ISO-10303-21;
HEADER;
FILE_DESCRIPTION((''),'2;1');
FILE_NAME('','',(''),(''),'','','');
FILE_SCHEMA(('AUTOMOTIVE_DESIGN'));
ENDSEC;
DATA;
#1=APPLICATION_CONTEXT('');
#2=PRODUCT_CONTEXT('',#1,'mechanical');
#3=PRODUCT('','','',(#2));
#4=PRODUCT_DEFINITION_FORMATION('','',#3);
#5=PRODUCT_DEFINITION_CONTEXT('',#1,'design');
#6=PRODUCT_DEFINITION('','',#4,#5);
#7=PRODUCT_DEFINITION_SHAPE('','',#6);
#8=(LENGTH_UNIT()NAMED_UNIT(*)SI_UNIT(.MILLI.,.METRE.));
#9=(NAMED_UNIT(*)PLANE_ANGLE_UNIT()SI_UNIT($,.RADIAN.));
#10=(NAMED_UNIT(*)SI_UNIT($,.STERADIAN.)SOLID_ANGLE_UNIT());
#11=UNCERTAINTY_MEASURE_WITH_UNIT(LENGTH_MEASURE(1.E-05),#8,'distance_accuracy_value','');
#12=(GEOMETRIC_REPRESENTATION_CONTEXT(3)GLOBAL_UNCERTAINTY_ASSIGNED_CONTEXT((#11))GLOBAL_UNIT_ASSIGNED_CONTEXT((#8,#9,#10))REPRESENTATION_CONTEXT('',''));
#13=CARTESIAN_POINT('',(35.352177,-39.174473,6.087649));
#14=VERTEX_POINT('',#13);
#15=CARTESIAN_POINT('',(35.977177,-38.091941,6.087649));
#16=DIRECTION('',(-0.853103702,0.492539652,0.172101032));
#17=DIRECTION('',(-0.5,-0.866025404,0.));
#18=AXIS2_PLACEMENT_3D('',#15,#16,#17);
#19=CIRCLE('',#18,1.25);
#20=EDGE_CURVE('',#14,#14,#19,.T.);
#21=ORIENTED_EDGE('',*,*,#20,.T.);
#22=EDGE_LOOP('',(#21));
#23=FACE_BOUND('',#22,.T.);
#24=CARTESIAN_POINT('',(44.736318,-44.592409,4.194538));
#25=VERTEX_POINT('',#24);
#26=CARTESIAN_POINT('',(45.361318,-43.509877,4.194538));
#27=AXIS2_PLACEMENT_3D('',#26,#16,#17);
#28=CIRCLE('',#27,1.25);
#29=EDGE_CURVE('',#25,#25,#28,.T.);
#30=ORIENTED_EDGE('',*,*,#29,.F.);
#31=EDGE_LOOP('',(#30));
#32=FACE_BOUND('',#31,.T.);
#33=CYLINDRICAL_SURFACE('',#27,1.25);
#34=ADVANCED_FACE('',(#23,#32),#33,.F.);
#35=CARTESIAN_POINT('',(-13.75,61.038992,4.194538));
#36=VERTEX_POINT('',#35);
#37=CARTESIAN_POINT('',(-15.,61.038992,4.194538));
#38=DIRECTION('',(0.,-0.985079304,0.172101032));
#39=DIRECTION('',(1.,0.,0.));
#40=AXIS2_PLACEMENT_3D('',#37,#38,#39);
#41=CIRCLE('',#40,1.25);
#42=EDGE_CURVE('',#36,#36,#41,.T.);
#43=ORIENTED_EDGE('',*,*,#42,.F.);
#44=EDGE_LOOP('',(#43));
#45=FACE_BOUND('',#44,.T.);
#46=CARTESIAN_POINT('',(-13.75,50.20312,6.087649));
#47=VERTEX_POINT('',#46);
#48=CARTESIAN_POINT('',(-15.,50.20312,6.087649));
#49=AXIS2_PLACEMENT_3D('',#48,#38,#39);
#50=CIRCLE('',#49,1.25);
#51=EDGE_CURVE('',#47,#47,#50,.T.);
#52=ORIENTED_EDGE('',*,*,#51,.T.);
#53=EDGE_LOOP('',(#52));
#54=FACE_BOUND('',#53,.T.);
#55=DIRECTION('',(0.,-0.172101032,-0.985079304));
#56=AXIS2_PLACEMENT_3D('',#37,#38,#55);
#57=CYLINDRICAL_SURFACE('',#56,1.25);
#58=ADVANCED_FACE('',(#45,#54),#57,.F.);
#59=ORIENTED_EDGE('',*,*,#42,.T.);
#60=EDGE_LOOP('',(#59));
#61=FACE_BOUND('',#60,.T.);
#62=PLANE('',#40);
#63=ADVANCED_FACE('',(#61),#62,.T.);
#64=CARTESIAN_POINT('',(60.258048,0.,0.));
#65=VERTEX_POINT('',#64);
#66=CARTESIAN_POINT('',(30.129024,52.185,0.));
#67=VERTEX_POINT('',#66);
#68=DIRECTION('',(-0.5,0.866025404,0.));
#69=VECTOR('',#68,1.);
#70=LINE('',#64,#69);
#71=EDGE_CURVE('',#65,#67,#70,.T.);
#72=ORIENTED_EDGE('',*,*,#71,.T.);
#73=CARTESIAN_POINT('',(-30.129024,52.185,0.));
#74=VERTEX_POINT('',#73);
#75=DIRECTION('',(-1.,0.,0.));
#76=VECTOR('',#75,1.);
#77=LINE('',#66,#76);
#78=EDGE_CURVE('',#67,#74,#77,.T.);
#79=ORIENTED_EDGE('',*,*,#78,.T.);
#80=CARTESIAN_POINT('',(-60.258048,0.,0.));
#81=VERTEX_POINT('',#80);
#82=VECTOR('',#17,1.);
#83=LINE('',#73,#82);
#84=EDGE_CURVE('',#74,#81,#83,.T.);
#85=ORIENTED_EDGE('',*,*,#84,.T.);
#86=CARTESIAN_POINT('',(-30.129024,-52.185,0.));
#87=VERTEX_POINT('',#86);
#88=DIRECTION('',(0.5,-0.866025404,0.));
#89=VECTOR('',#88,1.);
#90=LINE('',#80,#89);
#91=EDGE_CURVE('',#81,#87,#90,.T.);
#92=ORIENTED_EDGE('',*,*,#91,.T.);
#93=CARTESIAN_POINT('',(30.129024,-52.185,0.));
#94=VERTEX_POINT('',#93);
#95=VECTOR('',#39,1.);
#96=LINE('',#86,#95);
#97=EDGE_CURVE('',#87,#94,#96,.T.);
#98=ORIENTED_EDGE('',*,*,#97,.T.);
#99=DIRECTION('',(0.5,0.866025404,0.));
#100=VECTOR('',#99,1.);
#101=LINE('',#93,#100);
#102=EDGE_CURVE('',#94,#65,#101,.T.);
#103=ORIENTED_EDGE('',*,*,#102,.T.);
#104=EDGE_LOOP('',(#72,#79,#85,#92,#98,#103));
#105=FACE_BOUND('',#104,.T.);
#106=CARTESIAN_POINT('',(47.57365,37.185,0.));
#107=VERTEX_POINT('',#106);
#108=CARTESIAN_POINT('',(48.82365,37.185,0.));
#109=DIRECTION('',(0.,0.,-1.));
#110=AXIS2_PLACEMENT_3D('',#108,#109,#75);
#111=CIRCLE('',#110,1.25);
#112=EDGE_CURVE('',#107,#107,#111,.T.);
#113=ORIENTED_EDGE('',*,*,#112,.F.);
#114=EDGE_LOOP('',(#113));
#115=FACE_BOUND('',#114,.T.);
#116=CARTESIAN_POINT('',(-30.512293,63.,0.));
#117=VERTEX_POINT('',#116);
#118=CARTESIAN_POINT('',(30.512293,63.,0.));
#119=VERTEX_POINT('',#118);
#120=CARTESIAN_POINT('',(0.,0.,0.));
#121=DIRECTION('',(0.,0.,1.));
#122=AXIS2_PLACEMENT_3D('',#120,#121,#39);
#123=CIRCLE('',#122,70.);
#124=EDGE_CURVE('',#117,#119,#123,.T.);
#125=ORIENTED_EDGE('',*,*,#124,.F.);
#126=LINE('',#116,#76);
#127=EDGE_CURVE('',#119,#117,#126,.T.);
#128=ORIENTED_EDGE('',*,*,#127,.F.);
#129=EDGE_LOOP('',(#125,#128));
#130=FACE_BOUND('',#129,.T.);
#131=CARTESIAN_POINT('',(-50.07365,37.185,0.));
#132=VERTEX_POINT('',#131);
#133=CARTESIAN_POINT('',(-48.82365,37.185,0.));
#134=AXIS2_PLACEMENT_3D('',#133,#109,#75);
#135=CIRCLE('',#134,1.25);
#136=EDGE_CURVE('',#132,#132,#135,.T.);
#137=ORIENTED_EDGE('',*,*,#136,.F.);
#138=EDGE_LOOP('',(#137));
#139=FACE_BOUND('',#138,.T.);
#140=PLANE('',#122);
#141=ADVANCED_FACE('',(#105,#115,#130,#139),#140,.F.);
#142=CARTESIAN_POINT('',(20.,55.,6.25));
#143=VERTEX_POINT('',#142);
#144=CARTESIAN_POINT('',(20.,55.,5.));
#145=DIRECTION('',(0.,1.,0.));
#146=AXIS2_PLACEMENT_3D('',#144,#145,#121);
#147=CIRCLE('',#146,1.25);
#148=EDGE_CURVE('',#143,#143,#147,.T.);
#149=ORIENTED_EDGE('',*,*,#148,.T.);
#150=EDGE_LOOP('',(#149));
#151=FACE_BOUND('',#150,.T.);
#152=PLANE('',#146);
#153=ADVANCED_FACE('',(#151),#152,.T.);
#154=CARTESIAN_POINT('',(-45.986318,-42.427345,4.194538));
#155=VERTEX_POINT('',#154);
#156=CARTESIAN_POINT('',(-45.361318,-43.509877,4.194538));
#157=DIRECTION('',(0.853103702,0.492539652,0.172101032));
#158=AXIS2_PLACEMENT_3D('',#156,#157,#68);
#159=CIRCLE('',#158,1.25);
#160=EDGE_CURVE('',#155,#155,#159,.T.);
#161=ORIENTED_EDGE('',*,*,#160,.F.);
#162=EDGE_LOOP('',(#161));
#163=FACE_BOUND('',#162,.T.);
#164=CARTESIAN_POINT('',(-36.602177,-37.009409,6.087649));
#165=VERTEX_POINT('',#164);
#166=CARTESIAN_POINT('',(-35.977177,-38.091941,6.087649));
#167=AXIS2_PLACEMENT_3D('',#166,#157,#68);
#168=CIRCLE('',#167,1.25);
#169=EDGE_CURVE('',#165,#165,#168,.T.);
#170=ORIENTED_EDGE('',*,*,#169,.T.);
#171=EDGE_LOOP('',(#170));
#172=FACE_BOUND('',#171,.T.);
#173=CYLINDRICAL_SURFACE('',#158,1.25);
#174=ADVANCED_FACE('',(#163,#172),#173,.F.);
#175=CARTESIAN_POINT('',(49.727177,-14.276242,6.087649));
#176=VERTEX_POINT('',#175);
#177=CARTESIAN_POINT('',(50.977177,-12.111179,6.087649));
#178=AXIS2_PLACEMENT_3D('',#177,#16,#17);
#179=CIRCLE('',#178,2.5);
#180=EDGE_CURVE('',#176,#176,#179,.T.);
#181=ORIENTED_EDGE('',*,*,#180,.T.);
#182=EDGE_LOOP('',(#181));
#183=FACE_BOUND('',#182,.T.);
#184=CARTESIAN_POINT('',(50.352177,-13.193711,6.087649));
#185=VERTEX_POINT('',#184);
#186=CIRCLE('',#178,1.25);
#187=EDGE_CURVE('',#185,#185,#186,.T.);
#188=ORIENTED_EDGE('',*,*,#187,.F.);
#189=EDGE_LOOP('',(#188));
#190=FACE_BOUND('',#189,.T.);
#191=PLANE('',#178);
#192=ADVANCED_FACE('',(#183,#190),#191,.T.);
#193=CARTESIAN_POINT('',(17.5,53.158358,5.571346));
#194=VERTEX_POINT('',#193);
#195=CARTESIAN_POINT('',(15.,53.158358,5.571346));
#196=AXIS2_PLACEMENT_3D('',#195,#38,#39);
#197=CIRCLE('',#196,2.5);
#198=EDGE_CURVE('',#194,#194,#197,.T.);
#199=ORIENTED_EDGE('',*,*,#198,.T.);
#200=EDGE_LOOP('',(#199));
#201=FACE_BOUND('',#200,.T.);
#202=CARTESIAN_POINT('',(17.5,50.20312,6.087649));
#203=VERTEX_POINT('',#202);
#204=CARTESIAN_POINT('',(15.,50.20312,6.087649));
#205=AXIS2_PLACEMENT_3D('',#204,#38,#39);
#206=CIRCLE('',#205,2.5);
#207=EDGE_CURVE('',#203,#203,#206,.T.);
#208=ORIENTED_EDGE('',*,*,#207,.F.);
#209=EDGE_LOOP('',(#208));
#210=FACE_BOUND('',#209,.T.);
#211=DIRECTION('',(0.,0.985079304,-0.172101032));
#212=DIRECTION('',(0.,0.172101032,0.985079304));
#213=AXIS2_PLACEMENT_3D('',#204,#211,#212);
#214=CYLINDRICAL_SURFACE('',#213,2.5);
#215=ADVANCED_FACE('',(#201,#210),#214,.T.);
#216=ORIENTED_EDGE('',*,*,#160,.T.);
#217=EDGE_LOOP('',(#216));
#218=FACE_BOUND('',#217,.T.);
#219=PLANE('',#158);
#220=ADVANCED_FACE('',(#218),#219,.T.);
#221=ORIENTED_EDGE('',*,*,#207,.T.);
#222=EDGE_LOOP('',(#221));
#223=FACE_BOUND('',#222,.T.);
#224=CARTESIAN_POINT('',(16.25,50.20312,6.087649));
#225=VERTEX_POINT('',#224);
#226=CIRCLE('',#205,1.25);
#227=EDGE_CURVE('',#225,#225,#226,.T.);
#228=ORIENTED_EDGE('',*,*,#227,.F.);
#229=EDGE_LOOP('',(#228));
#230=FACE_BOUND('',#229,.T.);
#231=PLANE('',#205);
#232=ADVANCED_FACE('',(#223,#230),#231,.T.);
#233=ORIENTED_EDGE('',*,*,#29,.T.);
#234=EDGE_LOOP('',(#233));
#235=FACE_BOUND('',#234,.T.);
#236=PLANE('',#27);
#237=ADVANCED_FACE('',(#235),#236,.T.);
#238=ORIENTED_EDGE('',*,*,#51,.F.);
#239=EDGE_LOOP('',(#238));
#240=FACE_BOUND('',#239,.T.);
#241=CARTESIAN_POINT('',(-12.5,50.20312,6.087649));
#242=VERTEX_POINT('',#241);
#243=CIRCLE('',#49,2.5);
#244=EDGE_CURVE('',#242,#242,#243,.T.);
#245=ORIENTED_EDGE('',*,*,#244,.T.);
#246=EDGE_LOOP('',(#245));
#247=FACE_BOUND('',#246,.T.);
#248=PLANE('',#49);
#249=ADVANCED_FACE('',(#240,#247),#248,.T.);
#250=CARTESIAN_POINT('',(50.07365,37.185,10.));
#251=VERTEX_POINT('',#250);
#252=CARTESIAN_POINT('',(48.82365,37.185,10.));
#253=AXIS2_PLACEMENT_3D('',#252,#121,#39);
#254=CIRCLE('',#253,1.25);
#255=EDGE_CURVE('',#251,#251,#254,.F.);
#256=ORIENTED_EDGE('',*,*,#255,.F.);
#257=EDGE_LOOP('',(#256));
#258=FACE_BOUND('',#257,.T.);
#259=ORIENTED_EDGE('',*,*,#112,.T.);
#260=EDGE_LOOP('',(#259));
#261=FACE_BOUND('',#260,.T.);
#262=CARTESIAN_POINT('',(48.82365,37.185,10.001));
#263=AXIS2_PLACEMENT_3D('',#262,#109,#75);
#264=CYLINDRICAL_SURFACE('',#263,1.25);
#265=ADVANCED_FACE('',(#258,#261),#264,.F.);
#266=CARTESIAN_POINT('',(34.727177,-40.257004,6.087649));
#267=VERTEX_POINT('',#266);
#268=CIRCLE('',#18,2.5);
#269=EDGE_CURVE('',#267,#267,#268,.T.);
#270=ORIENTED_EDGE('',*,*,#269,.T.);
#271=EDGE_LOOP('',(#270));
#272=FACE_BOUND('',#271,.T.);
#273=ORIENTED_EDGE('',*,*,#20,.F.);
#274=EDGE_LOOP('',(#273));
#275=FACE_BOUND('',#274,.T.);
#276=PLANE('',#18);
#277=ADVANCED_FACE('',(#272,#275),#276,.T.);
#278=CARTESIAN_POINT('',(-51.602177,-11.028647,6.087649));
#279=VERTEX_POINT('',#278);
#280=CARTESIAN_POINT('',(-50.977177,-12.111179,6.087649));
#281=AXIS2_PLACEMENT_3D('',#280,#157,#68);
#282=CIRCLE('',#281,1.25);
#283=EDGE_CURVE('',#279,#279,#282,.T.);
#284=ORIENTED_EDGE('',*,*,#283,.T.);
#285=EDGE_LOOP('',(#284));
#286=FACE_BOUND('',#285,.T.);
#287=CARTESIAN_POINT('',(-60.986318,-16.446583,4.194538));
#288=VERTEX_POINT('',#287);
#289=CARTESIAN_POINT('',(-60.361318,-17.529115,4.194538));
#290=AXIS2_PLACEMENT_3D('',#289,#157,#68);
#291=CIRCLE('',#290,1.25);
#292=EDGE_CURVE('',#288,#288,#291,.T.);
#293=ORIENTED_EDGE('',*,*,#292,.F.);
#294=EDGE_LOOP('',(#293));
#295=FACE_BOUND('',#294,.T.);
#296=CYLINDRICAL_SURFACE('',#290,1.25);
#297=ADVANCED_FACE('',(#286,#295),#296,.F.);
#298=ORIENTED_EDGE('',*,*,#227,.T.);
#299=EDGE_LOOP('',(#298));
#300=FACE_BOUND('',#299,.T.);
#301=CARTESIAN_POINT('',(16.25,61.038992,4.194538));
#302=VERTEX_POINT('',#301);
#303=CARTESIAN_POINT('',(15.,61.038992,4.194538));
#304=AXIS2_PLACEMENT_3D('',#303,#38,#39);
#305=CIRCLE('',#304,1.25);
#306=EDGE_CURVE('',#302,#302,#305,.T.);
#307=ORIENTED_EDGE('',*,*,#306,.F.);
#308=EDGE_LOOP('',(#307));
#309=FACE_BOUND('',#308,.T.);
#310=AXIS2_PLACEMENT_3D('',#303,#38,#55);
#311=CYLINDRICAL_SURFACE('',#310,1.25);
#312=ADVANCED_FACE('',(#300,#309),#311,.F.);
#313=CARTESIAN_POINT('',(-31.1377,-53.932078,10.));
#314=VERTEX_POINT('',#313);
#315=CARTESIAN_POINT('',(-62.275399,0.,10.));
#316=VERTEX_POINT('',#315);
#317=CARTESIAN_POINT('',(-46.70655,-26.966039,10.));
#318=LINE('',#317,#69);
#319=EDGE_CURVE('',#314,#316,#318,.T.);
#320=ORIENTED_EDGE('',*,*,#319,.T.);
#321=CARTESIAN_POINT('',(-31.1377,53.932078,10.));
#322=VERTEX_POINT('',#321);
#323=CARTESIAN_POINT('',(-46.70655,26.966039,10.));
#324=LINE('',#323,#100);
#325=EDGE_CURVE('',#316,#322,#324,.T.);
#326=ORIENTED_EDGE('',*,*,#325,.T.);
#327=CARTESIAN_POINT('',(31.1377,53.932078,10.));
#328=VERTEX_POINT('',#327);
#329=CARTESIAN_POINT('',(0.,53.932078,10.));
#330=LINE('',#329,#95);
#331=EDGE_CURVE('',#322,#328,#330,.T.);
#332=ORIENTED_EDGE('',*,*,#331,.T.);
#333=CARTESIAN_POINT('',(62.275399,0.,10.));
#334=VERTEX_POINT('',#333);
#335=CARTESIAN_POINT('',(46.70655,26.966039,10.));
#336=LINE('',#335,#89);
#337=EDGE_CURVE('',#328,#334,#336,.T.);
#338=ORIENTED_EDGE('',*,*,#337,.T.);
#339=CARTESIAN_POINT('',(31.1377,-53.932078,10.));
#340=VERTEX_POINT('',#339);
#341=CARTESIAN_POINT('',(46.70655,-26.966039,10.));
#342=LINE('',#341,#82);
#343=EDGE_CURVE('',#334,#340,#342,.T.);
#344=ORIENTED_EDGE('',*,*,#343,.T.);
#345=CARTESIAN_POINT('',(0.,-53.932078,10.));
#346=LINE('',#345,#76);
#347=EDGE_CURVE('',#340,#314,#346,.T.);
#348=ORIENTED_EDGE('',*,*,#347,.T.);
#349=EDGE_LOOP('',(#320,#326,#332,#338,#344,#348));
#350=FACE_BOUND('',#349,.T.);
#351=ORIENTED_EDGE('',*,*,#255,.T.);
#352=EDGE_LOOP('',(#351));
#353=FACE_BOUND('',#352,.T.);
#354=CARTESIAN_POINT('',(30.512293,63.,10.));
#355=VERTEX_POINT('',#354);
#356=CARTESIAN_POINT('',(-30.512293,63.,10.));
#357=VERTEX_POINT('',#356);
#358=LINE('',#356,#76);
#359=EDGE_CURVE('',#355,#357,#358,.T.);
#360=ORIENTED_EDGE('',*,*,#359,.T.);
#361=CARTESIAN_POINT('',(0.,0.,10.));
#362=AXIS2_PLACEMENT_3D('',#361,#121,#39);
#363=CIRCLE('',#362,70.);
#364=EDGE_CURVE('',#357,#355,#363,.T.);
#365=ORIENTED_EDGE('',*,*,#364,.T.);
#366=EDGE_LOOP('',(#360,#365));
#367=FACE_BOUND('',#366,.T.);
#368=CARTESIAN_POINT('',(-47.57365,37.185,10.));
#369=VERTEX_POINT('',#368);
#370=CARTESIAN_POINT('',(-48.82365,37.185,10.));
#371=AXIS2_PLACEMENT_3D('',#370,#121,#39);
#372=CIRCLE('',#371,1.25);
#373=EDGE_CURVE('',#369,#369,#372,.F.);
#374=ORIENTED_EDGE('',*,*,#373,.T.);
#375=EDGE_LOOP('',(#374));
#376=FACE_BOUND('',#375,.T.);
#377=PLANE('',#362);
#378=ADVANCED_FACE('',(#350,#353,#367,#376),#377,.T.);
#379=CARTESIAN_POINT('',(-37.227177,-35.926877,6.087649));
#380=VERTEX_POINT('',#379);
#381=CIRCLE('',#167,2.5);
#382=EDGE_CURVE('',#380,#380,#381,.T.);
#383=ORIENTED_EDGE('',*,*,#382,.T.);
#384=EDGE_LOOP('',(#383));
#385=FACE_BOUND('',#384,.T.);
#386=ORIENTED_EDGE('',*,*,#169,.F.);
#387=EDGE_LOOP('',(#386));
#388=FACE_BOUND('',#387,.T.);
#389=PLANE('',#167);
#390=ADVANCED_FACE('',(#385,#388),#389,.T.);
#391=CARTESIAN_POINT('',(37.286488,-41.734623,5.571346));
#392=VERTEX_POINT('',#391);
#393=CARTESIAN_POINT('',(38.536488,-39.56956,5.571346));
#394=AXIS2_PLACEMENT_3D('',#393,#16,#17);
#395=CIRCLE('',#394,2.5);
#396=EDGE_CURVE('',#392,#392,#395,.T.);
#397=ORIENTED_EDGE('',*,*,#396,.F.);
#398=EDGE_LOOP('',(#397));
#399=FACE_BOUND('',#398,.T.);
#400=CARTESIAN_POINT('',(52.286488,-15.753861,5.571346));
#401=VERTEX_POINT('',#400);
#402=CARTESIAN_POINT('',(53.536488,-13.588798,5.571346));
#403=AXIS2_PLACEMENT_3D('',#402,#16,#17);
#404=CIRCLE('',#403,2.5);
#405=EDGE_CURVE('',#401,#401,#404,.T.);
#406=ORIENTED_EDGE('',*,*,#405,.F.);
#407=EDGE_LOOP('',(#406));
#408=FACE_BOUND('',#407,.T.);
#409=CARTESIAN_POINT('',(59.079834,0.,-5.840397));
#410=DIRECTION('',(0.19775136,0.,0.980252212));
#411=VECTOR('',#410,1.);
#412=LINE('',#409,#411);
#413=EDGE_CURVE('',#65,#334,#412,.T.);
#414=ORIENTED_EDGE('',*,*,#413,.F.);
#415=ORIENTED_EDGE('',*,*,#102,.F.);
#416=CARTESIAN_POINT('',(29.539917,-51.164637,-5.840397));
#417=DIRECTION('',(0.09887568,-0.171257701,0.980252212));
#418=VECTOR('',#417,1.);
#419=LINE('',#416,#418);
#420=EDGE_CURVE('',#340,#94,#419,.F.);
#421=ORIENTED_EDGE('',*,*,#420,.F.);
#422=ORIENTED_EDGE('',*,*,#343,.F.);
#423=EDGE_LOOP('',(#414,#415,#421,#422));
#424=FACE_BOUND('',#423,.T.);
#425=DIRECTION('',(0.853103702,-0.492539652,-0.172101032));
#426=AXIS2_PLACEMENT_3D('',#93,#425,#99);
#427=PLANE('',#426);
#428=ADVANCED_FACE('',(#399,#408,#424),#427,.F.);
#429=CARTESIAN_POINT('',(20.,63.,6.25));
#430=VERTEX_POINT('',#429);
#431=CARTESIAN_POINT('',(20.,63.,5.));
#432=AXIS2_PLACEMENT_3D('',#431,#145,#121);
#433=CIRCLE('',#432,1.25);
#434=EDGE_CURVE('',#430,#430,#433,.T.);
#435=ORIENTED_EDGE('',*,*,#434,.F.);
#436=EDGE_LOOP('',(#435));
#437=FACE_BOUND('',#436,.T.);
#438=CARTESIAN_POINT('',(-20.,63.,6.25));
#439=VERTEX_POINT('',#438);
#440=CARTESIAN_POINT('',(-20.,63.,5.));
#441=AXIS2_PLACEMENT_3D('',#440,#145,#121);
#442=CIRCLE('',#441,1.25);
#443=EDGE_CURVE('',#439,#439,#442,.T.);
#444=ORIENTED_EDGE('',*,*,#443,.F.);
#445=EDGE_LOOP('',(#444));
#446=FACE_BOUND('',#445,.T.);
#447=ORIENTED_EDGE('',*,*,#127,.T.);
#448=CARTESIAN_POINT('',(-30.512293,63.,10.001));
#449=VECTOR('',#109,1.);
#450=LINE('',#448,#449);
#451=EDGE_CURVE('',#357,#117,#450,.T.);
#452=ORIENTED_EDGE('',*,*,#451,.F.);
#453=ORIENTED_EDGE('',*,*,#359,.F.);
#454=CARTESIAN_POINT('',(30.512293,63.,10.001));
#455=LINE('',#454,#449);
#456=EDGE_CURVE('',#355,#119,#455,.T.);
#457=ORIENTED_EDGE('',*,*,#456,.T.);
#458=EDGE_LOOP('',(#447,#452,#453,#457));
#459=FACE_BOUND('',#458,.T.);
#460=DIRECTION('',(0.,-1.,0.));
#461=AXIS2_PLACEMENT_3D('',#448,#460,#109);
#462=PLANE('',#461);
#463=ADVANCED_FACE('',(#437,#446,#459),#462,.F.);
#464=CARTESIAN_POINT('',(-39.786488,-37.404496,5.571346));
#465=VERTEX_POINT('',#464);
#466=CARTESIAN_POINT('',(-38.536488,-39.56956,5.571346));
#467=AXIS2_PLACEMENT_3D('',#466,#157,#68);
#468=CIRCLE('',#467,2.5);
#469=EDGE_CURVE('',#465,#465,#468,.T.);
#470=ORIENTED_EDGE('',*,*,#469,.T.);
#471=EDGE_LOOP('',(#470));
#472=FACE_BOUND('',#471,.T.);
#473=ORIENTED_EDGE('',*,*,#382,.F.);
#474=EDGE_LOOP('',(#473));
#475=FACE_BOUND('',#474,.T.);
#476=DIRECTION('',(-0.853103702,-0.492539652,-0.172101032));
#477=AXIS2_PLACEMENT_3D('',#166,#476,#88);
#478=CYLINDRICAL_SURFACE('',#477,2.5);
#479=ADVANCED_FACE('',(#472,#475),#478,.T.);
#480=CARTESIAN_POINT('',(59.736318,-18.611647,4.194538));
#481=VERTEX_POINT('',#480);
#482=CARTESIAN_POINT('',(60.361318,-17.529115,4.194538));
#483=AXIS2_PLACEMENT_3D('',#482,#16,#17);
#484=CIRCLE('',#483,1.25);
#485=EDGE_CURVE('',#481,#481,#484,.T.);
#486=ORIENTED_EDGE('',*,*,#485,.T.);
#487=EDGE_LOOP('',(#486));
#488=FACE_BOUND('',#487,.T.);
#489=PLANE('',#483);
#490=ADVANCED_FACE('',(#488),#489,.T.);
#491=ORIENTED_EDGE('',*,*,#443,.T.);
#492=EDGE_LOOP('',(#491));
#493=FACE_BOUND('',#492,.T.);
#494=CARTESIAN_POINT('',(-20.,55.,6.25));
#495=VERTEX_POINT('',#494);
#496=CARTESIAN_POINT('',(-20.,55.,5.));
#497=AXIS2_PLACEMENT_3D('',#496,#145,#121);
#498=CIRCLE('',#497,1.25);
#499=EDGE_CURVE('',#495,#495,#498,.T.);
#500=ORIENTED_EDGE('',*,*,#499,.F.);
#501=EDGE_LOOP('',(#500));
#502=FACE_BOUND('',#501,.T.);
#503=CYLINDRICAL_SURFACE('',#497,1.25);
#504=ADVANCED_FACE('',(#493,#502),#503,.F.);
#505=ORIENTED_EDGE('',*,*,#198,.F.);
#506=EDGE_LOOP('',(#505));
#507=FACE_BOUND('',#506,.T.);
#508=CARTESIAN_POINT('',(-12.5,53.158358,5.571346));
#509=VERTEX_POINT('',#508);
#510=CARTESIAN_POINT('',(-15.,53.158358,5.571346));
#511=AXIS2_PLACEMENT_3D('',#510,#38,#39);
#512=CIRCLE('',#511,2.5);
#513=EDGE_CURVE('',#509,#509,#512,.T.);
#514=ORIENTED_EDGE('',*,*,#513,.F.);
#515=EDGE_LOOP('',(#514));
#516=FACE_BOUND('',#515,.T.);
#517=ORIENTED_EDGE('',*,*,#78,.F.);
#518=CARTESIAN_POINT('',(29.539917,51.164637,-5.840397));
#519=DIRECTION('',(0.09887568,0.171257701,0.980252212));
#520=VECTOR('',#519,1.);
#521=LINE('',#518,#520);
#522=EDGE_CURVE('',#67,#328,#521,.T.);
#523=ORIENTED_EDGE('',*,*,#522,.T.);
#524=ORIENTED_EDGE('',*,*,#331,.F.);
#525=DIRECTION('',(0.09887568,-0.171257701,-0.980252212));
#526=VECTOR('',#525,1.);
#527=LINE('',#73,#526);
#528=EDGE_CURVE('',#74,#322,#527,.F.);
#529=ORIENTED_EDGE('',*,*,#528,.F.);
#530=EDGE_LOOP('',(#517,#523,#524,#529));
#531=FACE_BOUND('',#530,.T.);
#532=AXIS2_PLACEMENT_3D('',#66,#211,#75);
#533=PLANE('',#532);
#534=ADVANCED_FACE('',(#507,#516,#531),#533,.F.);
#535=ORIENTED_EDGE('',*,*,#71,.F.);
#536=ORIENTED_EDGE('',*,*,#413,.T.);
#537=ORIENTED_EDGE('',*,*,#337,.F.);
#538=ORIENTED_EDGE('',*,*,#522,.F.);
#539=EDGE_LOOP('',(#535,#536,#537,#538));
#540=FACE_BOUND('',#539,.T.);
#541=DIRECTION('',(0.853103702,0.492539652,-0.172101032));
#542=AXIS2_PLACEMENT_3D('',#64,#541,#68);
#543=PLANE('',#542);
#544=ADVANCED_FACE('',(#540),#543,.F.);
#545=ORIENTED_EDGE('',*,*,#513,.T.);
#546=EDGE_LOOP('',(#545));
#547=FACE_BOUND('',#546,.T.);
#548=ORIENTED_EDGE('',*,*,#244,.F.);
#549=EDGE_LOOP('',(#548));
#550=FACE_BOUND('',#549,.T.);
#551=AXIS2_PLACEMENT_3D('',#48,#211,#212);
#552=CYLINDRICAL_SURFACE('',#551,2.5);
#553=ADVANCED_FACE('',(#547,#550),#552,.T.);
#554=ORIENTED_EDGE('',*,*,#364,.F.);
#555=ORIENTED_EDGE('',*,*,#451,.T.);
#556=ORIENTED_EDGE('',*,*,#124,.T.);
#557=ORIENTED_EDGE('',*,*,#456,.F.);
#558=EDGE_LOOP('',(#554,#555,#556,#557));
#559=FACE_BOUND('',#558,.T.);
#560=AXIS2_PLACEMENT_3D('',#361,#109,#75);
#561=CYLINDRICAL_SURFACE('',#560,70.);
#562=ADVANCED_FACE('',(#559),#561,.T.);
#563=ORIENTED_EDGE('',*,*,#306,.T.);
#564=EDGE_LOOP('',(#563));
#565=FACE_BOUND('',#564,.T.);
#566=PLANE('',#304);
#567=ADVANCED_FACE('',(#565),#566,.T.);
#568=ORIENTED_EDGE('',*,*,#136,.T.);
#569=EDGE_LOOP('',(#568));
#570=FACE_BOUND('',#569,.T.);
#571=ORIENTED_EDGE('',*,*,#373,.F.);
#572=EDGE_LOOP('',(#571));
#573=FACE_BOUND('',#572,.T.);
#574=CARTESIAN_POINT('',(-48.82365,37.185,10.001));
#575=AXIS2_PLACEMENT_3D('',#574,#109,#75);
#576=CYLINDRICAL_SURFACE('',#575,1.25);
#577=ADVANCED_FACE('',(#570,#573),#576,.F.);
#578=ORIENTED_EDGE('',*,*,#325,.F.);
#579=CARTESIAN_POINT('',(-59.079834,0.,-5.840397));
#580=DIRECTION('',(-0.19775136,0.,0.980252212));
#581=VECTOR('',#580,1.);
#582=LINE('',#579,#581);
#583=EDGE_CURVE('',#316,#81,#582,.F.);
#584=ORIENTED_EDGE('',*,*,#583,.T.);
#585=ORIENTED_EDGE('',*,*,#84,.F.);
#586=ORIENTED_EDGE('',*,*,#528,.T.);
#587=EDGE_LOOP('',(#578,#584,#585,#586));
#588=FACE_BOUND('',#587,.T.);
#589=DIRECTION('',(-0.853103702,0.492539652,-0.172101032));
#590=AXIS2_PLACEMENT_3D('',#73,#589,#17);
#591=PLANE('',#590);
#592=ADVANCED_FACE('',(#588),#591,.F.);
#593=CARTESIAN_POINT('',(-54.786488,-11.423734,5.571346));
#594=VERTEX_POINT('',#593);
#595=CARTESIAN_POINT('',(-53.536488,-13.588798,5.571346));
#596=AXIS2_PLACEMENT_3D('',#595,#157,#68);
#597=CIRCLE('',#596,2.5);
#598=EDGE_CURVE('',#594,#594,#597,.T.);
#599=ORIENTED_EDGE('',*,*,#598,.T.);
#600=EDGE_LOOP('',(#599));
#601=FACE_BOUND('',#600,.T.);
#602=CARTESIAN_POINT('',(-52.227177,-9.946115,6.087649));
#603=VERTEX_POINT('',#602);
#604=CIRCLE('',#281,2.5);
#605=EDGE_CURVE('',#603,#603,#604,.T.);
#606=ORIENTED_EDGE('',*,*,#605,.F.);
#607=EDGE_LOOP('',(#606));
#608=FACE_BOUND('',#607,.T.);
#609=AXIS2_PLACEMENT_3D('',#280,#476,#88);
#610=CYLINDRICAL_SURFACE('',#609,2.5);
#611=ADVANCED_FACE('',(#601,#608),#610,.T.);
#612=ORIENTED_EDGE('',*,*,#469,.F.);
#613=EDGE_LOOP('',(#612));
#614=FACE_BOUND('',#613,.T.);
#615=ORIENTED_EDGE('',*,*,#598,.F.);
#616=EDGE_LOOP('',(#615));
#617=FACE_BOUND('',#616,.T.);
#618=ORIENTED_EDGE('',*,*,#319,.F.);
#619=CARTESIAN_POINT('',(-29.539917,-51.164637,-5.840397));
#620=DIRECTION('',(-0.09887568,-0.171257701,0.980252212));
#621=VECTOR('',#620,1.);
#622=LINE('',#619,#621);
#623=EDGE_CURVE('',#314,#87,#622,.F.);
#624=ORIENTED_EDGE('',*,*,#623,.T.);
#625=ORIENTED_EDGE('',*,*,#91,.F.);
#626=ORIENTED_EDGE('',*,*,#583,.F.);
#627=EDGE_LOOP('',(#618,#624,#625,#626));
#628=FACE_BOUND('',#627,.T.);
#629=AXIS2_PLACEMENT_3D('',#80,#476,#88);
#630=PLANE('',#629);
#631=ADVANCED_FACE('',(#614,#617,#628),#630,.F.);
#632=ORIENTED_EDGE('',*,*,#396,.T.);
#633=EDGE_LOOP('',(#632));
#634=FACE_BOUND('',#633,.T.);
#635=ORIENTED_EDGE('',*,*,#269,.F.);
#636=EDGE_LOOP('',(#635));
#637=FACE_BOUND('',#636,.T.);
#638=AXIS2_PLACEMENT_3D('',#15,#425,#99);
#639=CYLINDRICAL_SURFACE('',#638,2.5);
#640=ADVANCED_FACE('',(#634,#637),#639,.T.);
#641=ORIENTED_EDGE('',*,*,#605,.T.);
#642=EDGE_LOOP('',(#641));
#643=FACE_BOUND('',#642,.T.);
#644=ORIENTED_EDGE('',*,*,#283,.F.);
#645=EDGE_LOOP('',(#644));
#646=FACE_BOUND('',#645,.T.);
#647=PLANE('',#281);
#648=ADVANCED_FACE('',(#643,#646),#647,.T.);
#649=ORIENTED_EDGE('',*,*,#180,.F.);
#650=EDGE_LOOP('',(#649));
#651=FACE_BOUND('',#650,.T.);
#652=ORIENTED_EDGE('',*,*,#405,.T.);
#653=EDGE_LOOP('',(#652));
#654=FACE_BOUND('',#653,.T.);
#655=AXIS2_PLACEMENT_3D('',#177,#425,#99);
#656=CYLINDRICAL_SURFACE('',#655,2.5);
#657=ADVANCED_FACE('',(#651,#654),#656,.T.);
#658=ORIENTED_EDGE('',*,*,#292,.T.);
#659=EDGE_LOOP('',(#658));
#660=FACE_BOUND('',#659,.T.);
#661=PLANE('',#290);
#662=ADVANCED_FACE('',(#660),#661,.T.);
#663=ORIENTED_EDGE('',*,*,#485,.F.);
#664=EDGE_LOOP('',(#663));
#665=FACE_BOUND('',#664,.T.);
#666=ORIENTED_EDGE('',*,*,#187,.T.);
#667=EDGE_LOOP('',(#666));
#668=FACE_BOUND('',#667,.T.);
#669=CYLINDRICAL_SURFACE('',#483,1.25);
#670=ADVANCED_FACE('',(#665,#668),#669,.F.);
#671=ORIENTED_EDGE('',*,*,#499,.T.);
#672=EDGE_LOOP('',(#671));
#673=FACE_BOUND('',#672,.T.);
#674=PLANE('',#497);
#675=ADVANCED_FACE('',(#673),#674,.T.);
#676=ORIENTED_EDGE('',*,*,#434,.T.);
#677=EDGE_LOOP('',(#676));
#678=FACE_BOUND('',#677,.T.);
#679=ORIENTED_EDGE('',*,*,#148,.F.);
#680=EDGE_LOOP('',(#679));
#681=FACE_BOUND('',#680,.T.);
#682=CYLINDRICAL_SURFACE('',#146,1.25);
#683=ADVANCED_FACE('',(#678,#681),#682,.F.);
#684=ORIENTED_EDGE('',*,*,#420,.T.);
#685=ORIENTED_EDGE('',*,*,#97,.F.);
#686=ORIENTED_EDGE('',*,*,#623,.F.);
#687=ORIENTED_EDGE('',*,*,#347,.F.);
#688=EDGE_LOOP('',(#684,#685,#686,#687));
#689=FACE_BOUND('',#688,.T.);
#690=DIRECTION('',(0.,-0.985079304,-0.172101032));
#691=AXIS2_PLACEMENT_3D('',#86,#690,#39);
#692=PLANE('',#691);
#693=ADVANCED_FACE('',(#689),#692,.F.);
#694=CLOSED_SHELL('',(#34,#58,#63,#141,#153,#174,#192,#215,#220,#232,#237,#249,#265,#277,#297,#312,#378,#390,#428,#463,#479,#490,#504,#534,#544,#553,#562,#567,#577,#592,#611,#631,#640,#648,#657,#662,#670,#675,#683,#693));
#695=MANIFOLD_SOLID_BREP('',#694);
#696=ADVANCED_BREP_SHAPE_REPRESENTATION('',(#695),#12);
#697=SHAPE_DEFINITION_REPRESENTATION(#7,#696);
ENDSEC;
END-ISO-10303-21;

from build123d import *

# Parameters (mm, degrees)
ESQUISSE1_R                  = 70
BOSS_EXTRU_1_DEPTH           = 10
CHANFREIN1_SIZE              = 10.000000024
CHANFREIN1_SIZE_2            = 1.74707794
ESQUISSE2_R                  = 1.25
ENL_V_MAT_EXTRU_1_DEPTH      = 8
BOSS_EXTRU_2_START           = 3
ESQUISSE3_R                  = 2.5
ESQUISSE3_R_2                = 1.25
BOSS_EXTRU_2_DEPTH           = 3
R_P_TITION_CIRCULAIRE1_COUNT = 3
ENL_V_MAT_EXTRU_2_REACH      = 101.499
ESQUISSE5_R                  = 1.25
ENL_V_MAT_EXTRU_3_DEPTH      = 8
ENL_V_MAT_EXTRU_4_REACH      = 101.499
ESQUISSE6_R                  = 1.25


with BuildPart() as part:
    # Esquisse1 → Boss.-Extru.1 (new body)
    with BuildSketch(Plane.XY):
        Circle(ESQUISSE1_R)
        Polygon((60.258047595, 0), (30.129023798, 52.185), (-30.129023798, 52.185), (-60.258047595, 0), (-30.129023798, -52.185), (30.129023798, -52.185), align=None, mode=Mode.SUBTRACT)
    extrude(amount=BOSS_EXTRU_1_DEPTH)

    # Chanfrein1
    # the kernel refuses this chamfer: 10.000000024, 1.74707794 mm, written as the material it takes off along each edge
    with BuildSketch(Plane(origin=(-17.136199158, 74.68923241, 10), x_dir=(0.005735622158407684, -0.0033114629971266528, -0.9999780681851351), z_dir=(-0.49999999999999933, -0.866025403784439, 0))) as chanfrein1_piece_1_section:
        Polygon((CHANFREIN1_SIZE * 0.999978068229, -CHANFREIN1_SIZE * 0.00662292599454), (-CHANFREIN1_SIZE_2 * 0.00662292599425, -CHANFREIN1_SIZE_2 * 0.999978068185), (0, 0), align=None)
    chanfrein1_piece_1 = extrude(amount=112.229346155, mode=Mode.PRIVATE)
    chanfrein1_piece_1 = split(chanfrein1_piece_1, bisect_by=Plane(origin=(-67.992097392, 13.395767196, 6.396743043), z_dir=(0.8660254037844387, 0.5000000000000003, 0)), keep=Keep.TOP, mode=Mode.PRIVATE)
    chanfrein1_piece_1 = split(chanfrein1_piece_1, bisect_by=Plane(origin=(-45.597123391, 52.185, 6.396743043), z_dir=(0, -1, 0)), keep=Keep.TOP, mode=Mode.PRIVATE)
    add(chanfrein1_piece_1, mode=Mode.SUBTRACT)
    with BuildSketch(Plane(origin=(-73.250872235, 22.50423241, 10), x_dir=(0.005735622158407019, 0.0033114629971262776, -0.9999780681851351), z_dir=(0.5000000000000003, -0.8660254037844386, 0))) as chanfrein1_piece_2_section:
        Polygon((CHANFREIN1_SIZE * 0.999978068229, -CHANFREIN1_SIZE * 0.00662292599454), (-CHANFREIN1_SIZE_2 * 0.00662292599425, -CHANFREIN1_SIZE_2 * 0.999978068185), (0, 0), align=None)
    chanfrein1_piece_2 = extrude(amount=112.229346155, mode=Mode.PRIVATE)
    chanfrein1_piece_2 = split(chanfrein1_piece_2, bisect_by=Plane(origin=(-45.597123391, -52.185, 6.396743043), z_dir=(0, 1, 0)), keep=Keep.TOP, mode=Mode.PRIVATE)
    chanfrein1_piece_2 = split(chanfrein1_piece_2, bisect_by=Plane(origin=(-67.992097392, -13.395767196, 6.396743043), z_dir=(0.866025403784439, -0.49999999999999933, 0)), keep=Keep.TOP, mode=Mode.PRIVATE)
    add(chanfrein1_piece_2, mode=Mode.SUBTRACT)
    with BuildSketch(Plane(origin=(-56.114673077, -52.185, 10), x_dir=(0, 0.006622925994253088, -0.9999780681851351), z_dir=(1, 0, 0))) as chanfrein1_piece_3_section:
        Polygon((CHANFREIN1_SIZE * 0.999978068229, -CHANFREIN1_SIZE * 0.00662292599454), (-CHANFREIN1_SIZE_2 * 0.00662292599425, -CHANFREIN1_SIZE_2 * 0.999978068185), (0, 0), align=None)
    chanfrein1_piece_3 = extrude(amount=112.229346155, mode=Mode.PRIVATE)
    chanfrein1_piece_3 = split(chanfrein1_piece_3, bisect_by=Plane(origin=(22.394974001, -65.580767196, 6.396743043), z_dir=(-0.8660254037844392, 0.4999999999999993, 0)), keep=Keep.TOP, mode=Mode.PRIVATE)
    chanfrein1_piece_3 = split(chanfrein1_piece_3, bisect_by=Plane(origin=(-22.394974001, -65.580767196, 6.396743043), z_dir=(0.8660254037844387, 0.5000000000000003, 0)), keep=Keep.TOP, mode=Mode.PRIVATE)
    add(chanfrein1_piece_3, mode=Mode.SUBTRACT)
    with BuildSketch(Plane(origin=(17.136199158, -74.68923241, 10), x_dir=(-0.005735622158407349, 0.0033114629971264585, -0.9999780681851351), z_dir=(0.4999999999999993, 0.8660254037844392, 0))) as chanfrein1_piece_4_section:
        Polygon((CHANFREIN1_SIZE * 0.999978068229, -CHANFREIN1_SIZE * 0.00662292599454), (-CHANFREIN1_SIZE_2 * 0.00662292599425, -CHANFREIN1_SIZE_2 * 0.999978068185), (0, 0), align=None)
    chanfrein1_piece_4 = extrude(amount=112.229346155, mode=Mode.PRIVATE)
    chanfrein1_piece_4 = split(chanfrein1_piece_4, bisect_by=Plane(origin=(45.597123391, -52.185, 6.396743043), z_dir=(0, 1, 0)), keep=Keep.TOP, mode=Mode.PRIVATE)
    chanfrein1_piece_4 = split(chanfrein1_piece_4, bisect_by=Plane(origin=(67.992097392, -13.395767196, 6.396743043), z_dir=(-0.8660254037844386, -0.5000000000000001, 0)), keep=Keep.TOP, mode=Mode.PRIVATE)
    add(chanfrein1_piece_4, mode=Mode.SUBTRACT)
    with BuildSketch(Plane(origin=(73.250872235, -22.50423241, 10), x_dir=(-0.005735622158407169, -0.0033114629971263618, -0.9999780681851351), z_dir=(-0.5000000000000001, 0.8660254037844386, 0))) as chanfrein1_piece_5_section:
        Polygon((CHANFREIN1_SIZE * 0.999978068229, -CHANFREIN1_SIZE * 0.00662292599454), (-CHANFREIN1_SIZE_2 * 0.00662292599425, -CHANFREIN1_SIZE_2 * 0.999978068185), (0, 0), align=None)
    chanfrein1_piece_5 = extrude(amount=112.229346155, mode=Mode.PRIVATE)
    chanfrein1_piece_5 = split(chanfrein1_piece_5, bisect_by=Plane(origin=(67.992097392, 13.395767196, 6.396743043), z_dir=(-0.8660254037844392, 0.4999999999999993, 0)), keep=Keep.TOP, mode=Mode.PRIVATE)
    chanfrein1_piece_5 = split(chanfrein1_piece_5, bisect_by=Plane(origin=(45.597123391, 52.185, 6.396743043), z_dir=(0, -1, 0)), keep=Keep.TOP, mode=Mode.PRIVATE)
    add(chanfrein1_piece_5, mode=Mode.SUBTRACT)
    with BuildSketch(Plane(origin=(56.114673077, 52.185, 10), x_dir=(0, -0.006622925994253088, -0.9999780681851351), z_dir=(-1, 0, 0))) as chanfrein1_piece_6_section:
        Polygon((CHANFREIN1_SIZE * 0.999978068229, -CHANFREIN1_SIZE * 0.00662292599454), (-CHANFREIN1_SIZE_2 * 0.00662292599425, -CHANFREIN1_SIZE_2 * 0.999978068185), (0, 0), align=None)
    chanfrein1_piece_6 = extrude(amount=112.229346155, mode=Mode.PRIVATE)
    chanfrein1_piece_6 = split(chanfrein1_piece_6, bisect_by=Plane(origin=(-22.394974001, 65.580767196, 6.396743043), z_dir=(0.866025403784439, -0.49999999999999933, 0)), keep=Keep.TOP, mode=Mode.PRIVATE)
    chanfrein1_piece_6 = split(chanfrein1_piece_6, bisect_by=Plane(origin=(22.394974001, 65.580767196, 6.396743043), z_dir=(-0.8660254037844386, -0.5000000000000001, 0)), keep=Keep.TOP, mode=Mode.PRIVATE)
    add(chanfrein1_piece_6, mode=Mode.SUBTRACT)
    with BuildSketch(Plane(origin=(-17.136199158, 74.68923241, 10), x_dir=(0.005735622158407684, -0.0033114629971266528, -0.9999780681851351), z_dir=(-0.49999999999999933, -0.866025403784439, 0))) as chanfrein1_piece_7a_section:
        Polygon((CHANFREIN1_SIZE * 0.999978068229, -CHANFREIN1_SIZE * 0.00662292599454), (-CHANFREIN1_SIZE_2 * 0.00662292599425, -CHANFREIN1_SIZE_2 * 0.999978068185), (0, 0), align=None)
    chanfrein1_piece_7a = extrude(amount=112.229346155, mode=Mode.PRIVATE)
    chanfrein1_piece_7a = split(chanfrein1_piece_7a, bisect_by=Plane(origin=(-24.113171626, 52.185, 6.425736603), z_dir=(0, 1, 0)), keep=Keep.TOP, mode=Mode.PRIVATE)
    with BuildSketch(Plane(origin=(56.114673077, 52.185, 10), x_dir=(0, -0.006622925994253088, -0.9999780681851351), z_dir=(-1, 0, 0))) as chanfrein1_piece_7b_section:
        Polygon((CHANFREIN1_SIZE * 0.999978068229, -CHANFREIN1_SIZE * 0.00662292599454), (-CHANFREIN1_SIZE_2 * 0.00662292599425, -CHANFREIN1_SIZE_2 * 0.999978068185), (0, 0), align=None)
    chanfrein1_piece_7b = extrude(amount=112.229346155, mode=Mode.PRIVATE)
    chanfrein1_piece_7b = split(chanfrein1_piece_7b, bisect_by=Plane(origin=(-33.136949884, 46.975119194, 6.425736603), z_dir=(-0.866025403784439, 0.49999999999999933, 0)), keep=Keep.TOP, mode=Mode.PRIVATE)
    chanfrein1_piece_7 = chanfrein1_piece_7a & chanfrein1_piece_7b
    add(chanfrein1_piece_7, mode=Mode.SUBTRACT)
    with BuildSketch(Plane(origin=(-73.250872235, 22.50423241, 10), x_dir=(0.005735622158407019, 0.0033114629971262776, -0.9999780681851351), z_dir=(0.5000000000000003, -0.8660254037844386, 0))) as chanfrein1_piece_8a_section:
        Polygon((CHANFREIN1_SIZE * 0.999978068229, -CHANFREIN1_SIZE * 0.00662292599454), (-CHANFREIN1_SIZE_2 * 0.00662292599425, -CHANFREIN1_SIZE_2 * 0.999978068185), (0, 0), align=None)
    chanfrein1_piece_8a = extrude(amount=112.229346155, mode=Mode.PRIVATE)
    chanfrein1_piece_8a = split(chanfrein1_piece_8a, bisect_by=Plane(origin=(-57.250121509, 5.209880806, 6.425736603), z_dir=(-0.866025403784439, 0.49999999999999933, 0)), keep=Keep.TOP, mode=Mode.PRIVATE)
    with BuildSketch(Plane(origin=(-17.136199158, 74.68923241, 10), x_dir=(0.005735622158407684, -0.0033114629971266528, -0.9999780681851351), z_dir=(-0.49999999999999933, -0.866025403784439, 0))) as chanfrein1_piece_8b_section:
        Polygon((CHANFREIN1_SIZE * 0.999978068229, -CHANFREIN1_SIZE * 0.00662292599454), (-CHANFREIN1_SIZE_2 * 0.00662292599425, -CHANFREIN1_SIZE_2 * 0.999978068185), (0, 0), align=None)
    chanfrein1_piece_8b = extrude(amount=112.229346155, mode=Mode.PRIVATE)
    chanfrein1_piece_8b = split(chanfrein1_piece_8b, bisect_by=Plane(origin=(-57.250121509, -5.209880806, 6.425736603), z_dir=(-0.8660254037844387, -0.5000000000000003, 0)), keep=Keep.TOP, mode=Mode.PRIVATE)
    chanfrein1_piece_8 = chanfrein1_piece_8a & chanfrein1_piece_8b
    add(chanfrein1_piece_8, mode=Mode.SUBTRACT)
    with BuildSketch(Plane(origin=(-56.114673077, -52.185, 10), x_dir=(0, 0.006622925994253088, -0.9999780681851351), z_dir=(1, 0, 0))) as chanfrein1_piece_9a_section:
        Polygon((CHANFREIN1_SIZE * 0.999978068229, -CHANFREIN1_SIZE * 0.00662292599454), (-CHANFREIN1_SIZE_2 * 0.00662292599425, -CHANFREIN1_SIZE_2 * 0.999978068185), (0, 0), align=None)
    chanfrein1_piece_9a = extrude(amount=112.229346155, mode=Mode.PRIVATE)
    chanfrein1_piece_9a = split(chanfrein1_piece_9a, bisect_by=Plane(origin=(-33.136949884, -46.975119194, 6.425736603), z_dir=(-0.8660254037844387, -0.5000000000000003, 0)), keep=Keep.TOP, mode=Mode.PRIVATE)
    with BuildSketch(Plane(origin=(-73.250872235, 22.50423241, 10), x_dir=(0.005735622158407019, 0.0033114629971262776, -0.9999780681851351), z_dir=(0.5000000000000003, -0.8660254037844386, 0))) as chanfrein1_piece_9b_section:
        Polygon((CHANFREIN1_SIZE * 0.999978068229, -CHANFREIN1_SIZE * 0.00662292599454), (-CHANFREIN1_SIZE_2 * 0.00662292599425, -CHANFREIN1_SIZE_2 * 0.999978068185), (0, 0), align=None)
    chanfrein1_piece_9b = extrude(amount=112.229346155, mode=Mode.PRIVATE)
    chanfrein1_piece_9b = split(chanfrein1_piece_9b, bisect_by=Plane(origin=(-24.113171626, -52.185, 6.425736603), z_dir=(0, -1, 0)), keep=Keep.TOP, mode=Mode.PRIVATE)
    chanfrein1_piece_9 = chanfrein1_piece_9a & chanfrein1_piece_9b
    add(chanfrein1_piece_9, mode=Mode.SUBTRACT)
    with BuildSketch(Plane(origin=(17.136199158, -74.68923241, 10), x_dir=(-0.005735622158407349, 0.0033114629971264585, -0.9999780681851351), z_dir=(0.4999999999999993, 0.8660254037844392, 0))) as chanfrein1_piece_10a_section:
        Polygon((CHANFREIN1_SIZE * 0.999978068229, -CHANFREIN1_SIZE * 0.00662292599454), (-CHANFREIN1_SIZE_2 * 0.00662292599425, -CHANFREIN1_SIZE_2 * 0.999978068185), (0, 0), align=None)
    chanfrein1_piece_10a = extrude(amount=112.229346155, mode=Mode.PRIVATE)
    chanfrein1_piece_10a = split(chanfrein1_piece_10a, bisect_by=Plane(origin=(24.113171626, -52.185, 6.425736603), z_dir=(0, -1, 0)), keep=Keep.TOP, mode=Mode.PRIVATE)
    with BuildSketch(Plane(origin=(-56.114673077, -52.185, 10), x_dir=(0, 0.006622925994253088, -0.9999780681851351), z_dir=(1, 0, 0))) as chanfrein1_piece_10b_section:
        Polygon((CHANFREIN1_SIZE * 0.999978068229, -CHANFREIN1_SIZE * 0.00662292599454), (-CHANFREIN1_SIZE_2 * 0.00662292599425, -CHANFREIN1_SIZE_2 * 0.999978068185), (0, 0), align=None)
    chanfrein1_piece_10b = extrude(amount=112.229346155, mode=Mode.PRIVATE)
    chanfrein1_piece_10b = split(chanfrein1_piece_10b, bisect_by=Plane(origin=(33.136949884, -46.975119194, 6.425736603), z_dir=(0.8660254037844392, -0.4999999999999993, 0)), keep=Keep.TOP, mode=Mode.PRIVATE)
    chanfrein1_piece_10 = chanfrein1_piece_10a & chanfrein1_piece_10b
    add(chanfrein1_piece_10, mode=Mode.SUBTRACT)
    with BuildSketch(Plane(origin=(17.136199158, -74.68923241, 10), x_dir=(-0.005735622158407349, 0.0033114629971264585, -0.9999780681851351), z_dir=(0.4999999999999993, 0.8660254037844392, 0))) as chanfrein1_piece_11a_section:
        Polygon((CHANFREIN1_SIZE * 0.999978068229, -CHANFREIN1_SIZE * 0.00662292599454), (-CHANFREIN1_SIZE_2 * 0.00662292599425, -CHANFREIN1_SIZE_2 * 0.999978068185), (0, 0), align=None)
    chanfrein1_piece_11a = extrude(amount=112.229346155, mode=Mode.PRIVATE)
    chanfrein1_piece_11a = split(chanfrein1_piece_11a, bisect_by=Plane(origin=(57.250121509, 5.209880806, 6.425736603), z_dir=(0.8660254037844386, 0.5000000000000001, 0)), keep=Keep.TOP, mode=Mode.PRIVATE)
    with BuildSketch(Plane(origin=(73.250872235, -22.50423241, 10), x_dir=(-0.005735622158407169, -0.0033114629971263618, -0.9999780681851351), z_dir=(-0.5000000000000001, 0.8660254037844386, 0))) as chanfrein1_piece_11b_section:
        Polygon((CHANFREIN1_SIZE * 0.999978068229, -CHANFREIN1_SIZE * 0.00662292599454), (-CHANFREIN1_SIZE_2 * 0.00662292599425, -CHANFREIN1_SIZE_2 * 0.999978068185), (0, 0), align=None)
    chanfrein1_piece_11b = extrude(amount=112.229346155, mode=Mode.PRIVATE)
    chanfrein1_piece_11b = split(chanfrein1_piece_11b, bisect_by=Plane(origin=(57.250121509, -5.209880806, 6.425736603), z_dir=(0.8660254037844392, -0.4999999999999993, 0)), keep=Keep.TOP, mode=Mode.PRIVATE)
    chanfrein1_piece_11 = chanfrein1_piece_11a & chanfrein1_piece_11b
    add(chanfrein1_piece_11, mode=Mode.SUBTRACT)
    with BuildSketch(Plane(origin=(56.114673077, 52.185, 10), x_dir=(0, -0.006622925994253088, -0.9999780681851351), z_dir=(-1, 0, 0))) as chanfrein1_piece_12a_section:
        Polygon((CHANFREIN1_SIZE * 0.999978068229, -CHANFREIN1_SIZE * 0.00662292599454), (-CHANFREIN1_SIZE_2 * 0.00662292599425, -CHANFREIN1_SIZE_2 * 0.999978068185), (0, 0), align=None)
    chanfrein1_piece_12a = extrude(amount=112.229346155, mode=Mode.PRIVATE)
    chanfrein1_piece_12a = split(chanfrein1_piece_12a, bisect_by=Plane(origin=(33.136949884, 46.975119194, 6.425736603), z_dir=(0.8660254037844386, 0.5000000000000001, 0)), keep=Keep.TOP, mode=Mode.PRIVATE)
    with BuildSketch(Plane(origin=(73.250872235, -22.50423241, 10), x_dir=(-0.005735622158407169, -0.0033114629971263618, -0.9999780681851351), z_dir=(-0.5000000000000001, 0.8660254037844386, 0))) as chanfrein1_piece_12b_section:
        Polygon((CHANFREIN1_SIZE * 0.999978068229, -CHANFREIN1_SIZE * 0.00662292599454), (-CHANFREIN1_SIZE_2 * 0.00662292599425, -CHANFREIN1_SIZE_2 * 0.999978068185), (0, 0), align=None)
    chanfrein1_piece_12b = extrude(amount=112.229346155, mode=Mode.PRIVATE)
    chanfrein1_piece_12b = split(chanfrein1_piece_12b, bisect_by=Plane(origin=(24.113171626, 52.185, 6.425736603), z_dir=(0, 1, 0)), keep=Keep.TOP, mode=Mode.PRIVATE)
    chanfrein1_piece_12 = chanfrein1_piece_12a & chanfrein1_piece_12b
    add(chanfrein1_piece_12, mode=Mode.SUBTRACT)

    # Esquisse2 → Enlèv. mat.-Extru.1 (cut)
    with BuildSketch(Plane(origin=(-43.854958982, -25.319672374, -8.847088189), x_dir=(0.1490438654456729, 0.0860505158361217, -0.9850793038620543), z_dir=(0.8531037018868293, 0.4925396519310274, 0.17210103167224328))):
        with Locations(Location((-14.636825815, 15, 0), (0, 0, 90))):
            Circle(ESQUISSE2_R)
        with Locations(Location((-14.636825815, -15, 0), (0, 0, 90))):
            Circle(ESQUISSE2_R)
    enl_v_mat_extru_1 = extrude(amount=-ENL_V_MAT_EXTRU_1_DEPTH, mode=Mode.SUBTRACT)

    # Esquisse3 → Boss.-Extru.2 (add)
    # profile 1 of 2: a face of its own
    with BuildSketch(Plane(origin=(-43.854958982, -25.319672374, -8.847088189), x_dir=(0.1490438654456729, 0.0860505158361217, -0.9850793038620543), z_dir=(0.8531037018868293, 0.4925396519310274, 0.17210103167224328)).offset(BOSS_EXTRU_2_START)):
        with Locations(Location((-14.636825815, -15, 0), (0, 0, 90))):
            Circle(ESQUISSE3_R)
        with Locations(Location((-14.636825815, -15, 0), (0, 0, 90))):
            Circle(ESQUISSE3_R_2, mode=Mode.SUBTRACT)
    # profile 2 of 2: a face of its own
    with BuildSketch(Plane(origin=(-43.854958982, -25.319672374, -8.847088189), x_dir=(0.1490438654456729, 0.0860505158361217, -0.9850793038620543), z_dir=(0.8531037018868293, 0.4925396519310274, 0.17210103167224328)).offset(BOSS_EXTRU_2_START)):
        with Locations(Location((-14.636825815, 15, 0), (0, 0, 90))):
            Circle(ESQUISSE3_R)
        with Locations(Location((-14.636825815, 15, 0), (0, 0, 90))):
            Circle(ESQUISSE3_R_2, mode=Mode.SUBTRACT)
    boss_extru_2 = extrude(amount=-BOSS_EXTRU_2_DEPTH)

    # Répétition circulaire1: Enlèv. mat.-Extru.1, Boss.-Extru.2 ×3 about axis
    r_p_tition_circulaire1_axis = Axis((0, 0, 0), (0, 0, 1))
    add([enl_v_mat_extru_1.rotate(r_p_tition_circulaire1_axis, i * 360 / R_P_TITION_CIRCULAIRE1_COUNT) for i in range(1, R_P_TITION_CIRCULAIRE1_COUNT)], mode=Mode.SUBTRACT)
    add([boss_extru_2.rotate(r_p_tition_circulaire1_axis, i * 360 / R_P_TITION_CIRCULAIRE1_COUNT) for i in range(1, R_P_TITION_CIRCULAIRE1_COUNT)])

    # Esquisse4 → Enlèv. mat.-Extru.2 (cut, up to next)
    with BuildSketch(Plane(origin=(0, 0, 0), x_dir=(-1, 0, 0), z_dir=(0, 0, -1)), mode=Mode.PRIVATE) as enl_v_mat_extru_2_sk1:
        with BuildLine():
            Line((30.512292605, 63), (-30.512292605, 63))
            ThreePointArc((-30.512292605, 63), (0, 70), (30.512292605, 63))
        make_face()
    enl_v_mat_extru_2_tool1 = extrude(enl_v_mat_extru_2_sk1.sketch, amount=-ENL_V_MAT_EXTRU_2_REACH, mode=Mode.PRIVATE) & part.part
    add(enl_v_mat_extru_2_tool1.solids().sort_by_distance((0, 65.812358, 0))[0], mode=Mode.SUBTRACT)

    # Esquisse5 → Enlèv. mat.-Extru.3 (cut)
    with BuildSketch(Plane(origin=(0, 63, 0), x_dir=(1, 0, 0), z_dir=(0, 1, 0))):
        with Locations(Location((-20, -5, 0), (0, 0, 270))):
            Circle(ESQUISSE5_R)
        with Locations(Location((20, -5, 0), (0, 0, 270))):
            Circle(ESQUISSE5_R)
    extrude(amount=-ENL_V_MAT_EXTRU_3_DEPTH, mode=Mode.SUBTRACT)

    # Esquisse6 → Enlèv. mat.-Extru.4 (cut, up to next)
    with BuildSketch(Plane(origin=(0, 0, 0), x_dir=(-1, 0, 0), z_dir=(0, 0, -1)), mode=Mode.PRIVATE) as enl_v_mat_extru_4_sk1:
        with Locations((48.823650244, 37.185)):
            Circle(ESQUISSE6_R)
    enl_v_mat_extru_4_tool1 = extrude(enl_v_mat_extru_4_sk1.sketch, amount=-ENL_V_MAT_EXTRU_4_REACH, mode=Mode.PRIVATE) & part.part
    # Esquisse6 → Enlèv. mat.-Extru.4 (cut, up to next)
    with BuildSketch(Plane(origin=(0, 0, 0), x_dir=(-1, 0, 0), z_dir=(0, 0, -1)), mode=Mode.PRIVATE) as enl_v_mat_extru_4_sk2:
        with Locations((-48.823650244, 37.185)):
            Circle(ESQUISSE6_R)
    enl_v_mat_extru_4_tool2 = extrude(enl_v_mat_extru_4_sk2.sketch, amount=-ENL_V_MAT_EXTRU_4_REACH, mode=Mode.PRIVATE) & part.part
    add(enl_v_mat_extru_4_tool1.solids().sort_by_distance((-48.82365, 37.185, 0))[0], mode=Mode.SUBTRACT)
    add(enl_v_mat_extru_4_tool2.solids().sort_by_distance((48.82365, 37.185, 0))[0], mode=Mode.SUBTRACT)


solid = part.part
